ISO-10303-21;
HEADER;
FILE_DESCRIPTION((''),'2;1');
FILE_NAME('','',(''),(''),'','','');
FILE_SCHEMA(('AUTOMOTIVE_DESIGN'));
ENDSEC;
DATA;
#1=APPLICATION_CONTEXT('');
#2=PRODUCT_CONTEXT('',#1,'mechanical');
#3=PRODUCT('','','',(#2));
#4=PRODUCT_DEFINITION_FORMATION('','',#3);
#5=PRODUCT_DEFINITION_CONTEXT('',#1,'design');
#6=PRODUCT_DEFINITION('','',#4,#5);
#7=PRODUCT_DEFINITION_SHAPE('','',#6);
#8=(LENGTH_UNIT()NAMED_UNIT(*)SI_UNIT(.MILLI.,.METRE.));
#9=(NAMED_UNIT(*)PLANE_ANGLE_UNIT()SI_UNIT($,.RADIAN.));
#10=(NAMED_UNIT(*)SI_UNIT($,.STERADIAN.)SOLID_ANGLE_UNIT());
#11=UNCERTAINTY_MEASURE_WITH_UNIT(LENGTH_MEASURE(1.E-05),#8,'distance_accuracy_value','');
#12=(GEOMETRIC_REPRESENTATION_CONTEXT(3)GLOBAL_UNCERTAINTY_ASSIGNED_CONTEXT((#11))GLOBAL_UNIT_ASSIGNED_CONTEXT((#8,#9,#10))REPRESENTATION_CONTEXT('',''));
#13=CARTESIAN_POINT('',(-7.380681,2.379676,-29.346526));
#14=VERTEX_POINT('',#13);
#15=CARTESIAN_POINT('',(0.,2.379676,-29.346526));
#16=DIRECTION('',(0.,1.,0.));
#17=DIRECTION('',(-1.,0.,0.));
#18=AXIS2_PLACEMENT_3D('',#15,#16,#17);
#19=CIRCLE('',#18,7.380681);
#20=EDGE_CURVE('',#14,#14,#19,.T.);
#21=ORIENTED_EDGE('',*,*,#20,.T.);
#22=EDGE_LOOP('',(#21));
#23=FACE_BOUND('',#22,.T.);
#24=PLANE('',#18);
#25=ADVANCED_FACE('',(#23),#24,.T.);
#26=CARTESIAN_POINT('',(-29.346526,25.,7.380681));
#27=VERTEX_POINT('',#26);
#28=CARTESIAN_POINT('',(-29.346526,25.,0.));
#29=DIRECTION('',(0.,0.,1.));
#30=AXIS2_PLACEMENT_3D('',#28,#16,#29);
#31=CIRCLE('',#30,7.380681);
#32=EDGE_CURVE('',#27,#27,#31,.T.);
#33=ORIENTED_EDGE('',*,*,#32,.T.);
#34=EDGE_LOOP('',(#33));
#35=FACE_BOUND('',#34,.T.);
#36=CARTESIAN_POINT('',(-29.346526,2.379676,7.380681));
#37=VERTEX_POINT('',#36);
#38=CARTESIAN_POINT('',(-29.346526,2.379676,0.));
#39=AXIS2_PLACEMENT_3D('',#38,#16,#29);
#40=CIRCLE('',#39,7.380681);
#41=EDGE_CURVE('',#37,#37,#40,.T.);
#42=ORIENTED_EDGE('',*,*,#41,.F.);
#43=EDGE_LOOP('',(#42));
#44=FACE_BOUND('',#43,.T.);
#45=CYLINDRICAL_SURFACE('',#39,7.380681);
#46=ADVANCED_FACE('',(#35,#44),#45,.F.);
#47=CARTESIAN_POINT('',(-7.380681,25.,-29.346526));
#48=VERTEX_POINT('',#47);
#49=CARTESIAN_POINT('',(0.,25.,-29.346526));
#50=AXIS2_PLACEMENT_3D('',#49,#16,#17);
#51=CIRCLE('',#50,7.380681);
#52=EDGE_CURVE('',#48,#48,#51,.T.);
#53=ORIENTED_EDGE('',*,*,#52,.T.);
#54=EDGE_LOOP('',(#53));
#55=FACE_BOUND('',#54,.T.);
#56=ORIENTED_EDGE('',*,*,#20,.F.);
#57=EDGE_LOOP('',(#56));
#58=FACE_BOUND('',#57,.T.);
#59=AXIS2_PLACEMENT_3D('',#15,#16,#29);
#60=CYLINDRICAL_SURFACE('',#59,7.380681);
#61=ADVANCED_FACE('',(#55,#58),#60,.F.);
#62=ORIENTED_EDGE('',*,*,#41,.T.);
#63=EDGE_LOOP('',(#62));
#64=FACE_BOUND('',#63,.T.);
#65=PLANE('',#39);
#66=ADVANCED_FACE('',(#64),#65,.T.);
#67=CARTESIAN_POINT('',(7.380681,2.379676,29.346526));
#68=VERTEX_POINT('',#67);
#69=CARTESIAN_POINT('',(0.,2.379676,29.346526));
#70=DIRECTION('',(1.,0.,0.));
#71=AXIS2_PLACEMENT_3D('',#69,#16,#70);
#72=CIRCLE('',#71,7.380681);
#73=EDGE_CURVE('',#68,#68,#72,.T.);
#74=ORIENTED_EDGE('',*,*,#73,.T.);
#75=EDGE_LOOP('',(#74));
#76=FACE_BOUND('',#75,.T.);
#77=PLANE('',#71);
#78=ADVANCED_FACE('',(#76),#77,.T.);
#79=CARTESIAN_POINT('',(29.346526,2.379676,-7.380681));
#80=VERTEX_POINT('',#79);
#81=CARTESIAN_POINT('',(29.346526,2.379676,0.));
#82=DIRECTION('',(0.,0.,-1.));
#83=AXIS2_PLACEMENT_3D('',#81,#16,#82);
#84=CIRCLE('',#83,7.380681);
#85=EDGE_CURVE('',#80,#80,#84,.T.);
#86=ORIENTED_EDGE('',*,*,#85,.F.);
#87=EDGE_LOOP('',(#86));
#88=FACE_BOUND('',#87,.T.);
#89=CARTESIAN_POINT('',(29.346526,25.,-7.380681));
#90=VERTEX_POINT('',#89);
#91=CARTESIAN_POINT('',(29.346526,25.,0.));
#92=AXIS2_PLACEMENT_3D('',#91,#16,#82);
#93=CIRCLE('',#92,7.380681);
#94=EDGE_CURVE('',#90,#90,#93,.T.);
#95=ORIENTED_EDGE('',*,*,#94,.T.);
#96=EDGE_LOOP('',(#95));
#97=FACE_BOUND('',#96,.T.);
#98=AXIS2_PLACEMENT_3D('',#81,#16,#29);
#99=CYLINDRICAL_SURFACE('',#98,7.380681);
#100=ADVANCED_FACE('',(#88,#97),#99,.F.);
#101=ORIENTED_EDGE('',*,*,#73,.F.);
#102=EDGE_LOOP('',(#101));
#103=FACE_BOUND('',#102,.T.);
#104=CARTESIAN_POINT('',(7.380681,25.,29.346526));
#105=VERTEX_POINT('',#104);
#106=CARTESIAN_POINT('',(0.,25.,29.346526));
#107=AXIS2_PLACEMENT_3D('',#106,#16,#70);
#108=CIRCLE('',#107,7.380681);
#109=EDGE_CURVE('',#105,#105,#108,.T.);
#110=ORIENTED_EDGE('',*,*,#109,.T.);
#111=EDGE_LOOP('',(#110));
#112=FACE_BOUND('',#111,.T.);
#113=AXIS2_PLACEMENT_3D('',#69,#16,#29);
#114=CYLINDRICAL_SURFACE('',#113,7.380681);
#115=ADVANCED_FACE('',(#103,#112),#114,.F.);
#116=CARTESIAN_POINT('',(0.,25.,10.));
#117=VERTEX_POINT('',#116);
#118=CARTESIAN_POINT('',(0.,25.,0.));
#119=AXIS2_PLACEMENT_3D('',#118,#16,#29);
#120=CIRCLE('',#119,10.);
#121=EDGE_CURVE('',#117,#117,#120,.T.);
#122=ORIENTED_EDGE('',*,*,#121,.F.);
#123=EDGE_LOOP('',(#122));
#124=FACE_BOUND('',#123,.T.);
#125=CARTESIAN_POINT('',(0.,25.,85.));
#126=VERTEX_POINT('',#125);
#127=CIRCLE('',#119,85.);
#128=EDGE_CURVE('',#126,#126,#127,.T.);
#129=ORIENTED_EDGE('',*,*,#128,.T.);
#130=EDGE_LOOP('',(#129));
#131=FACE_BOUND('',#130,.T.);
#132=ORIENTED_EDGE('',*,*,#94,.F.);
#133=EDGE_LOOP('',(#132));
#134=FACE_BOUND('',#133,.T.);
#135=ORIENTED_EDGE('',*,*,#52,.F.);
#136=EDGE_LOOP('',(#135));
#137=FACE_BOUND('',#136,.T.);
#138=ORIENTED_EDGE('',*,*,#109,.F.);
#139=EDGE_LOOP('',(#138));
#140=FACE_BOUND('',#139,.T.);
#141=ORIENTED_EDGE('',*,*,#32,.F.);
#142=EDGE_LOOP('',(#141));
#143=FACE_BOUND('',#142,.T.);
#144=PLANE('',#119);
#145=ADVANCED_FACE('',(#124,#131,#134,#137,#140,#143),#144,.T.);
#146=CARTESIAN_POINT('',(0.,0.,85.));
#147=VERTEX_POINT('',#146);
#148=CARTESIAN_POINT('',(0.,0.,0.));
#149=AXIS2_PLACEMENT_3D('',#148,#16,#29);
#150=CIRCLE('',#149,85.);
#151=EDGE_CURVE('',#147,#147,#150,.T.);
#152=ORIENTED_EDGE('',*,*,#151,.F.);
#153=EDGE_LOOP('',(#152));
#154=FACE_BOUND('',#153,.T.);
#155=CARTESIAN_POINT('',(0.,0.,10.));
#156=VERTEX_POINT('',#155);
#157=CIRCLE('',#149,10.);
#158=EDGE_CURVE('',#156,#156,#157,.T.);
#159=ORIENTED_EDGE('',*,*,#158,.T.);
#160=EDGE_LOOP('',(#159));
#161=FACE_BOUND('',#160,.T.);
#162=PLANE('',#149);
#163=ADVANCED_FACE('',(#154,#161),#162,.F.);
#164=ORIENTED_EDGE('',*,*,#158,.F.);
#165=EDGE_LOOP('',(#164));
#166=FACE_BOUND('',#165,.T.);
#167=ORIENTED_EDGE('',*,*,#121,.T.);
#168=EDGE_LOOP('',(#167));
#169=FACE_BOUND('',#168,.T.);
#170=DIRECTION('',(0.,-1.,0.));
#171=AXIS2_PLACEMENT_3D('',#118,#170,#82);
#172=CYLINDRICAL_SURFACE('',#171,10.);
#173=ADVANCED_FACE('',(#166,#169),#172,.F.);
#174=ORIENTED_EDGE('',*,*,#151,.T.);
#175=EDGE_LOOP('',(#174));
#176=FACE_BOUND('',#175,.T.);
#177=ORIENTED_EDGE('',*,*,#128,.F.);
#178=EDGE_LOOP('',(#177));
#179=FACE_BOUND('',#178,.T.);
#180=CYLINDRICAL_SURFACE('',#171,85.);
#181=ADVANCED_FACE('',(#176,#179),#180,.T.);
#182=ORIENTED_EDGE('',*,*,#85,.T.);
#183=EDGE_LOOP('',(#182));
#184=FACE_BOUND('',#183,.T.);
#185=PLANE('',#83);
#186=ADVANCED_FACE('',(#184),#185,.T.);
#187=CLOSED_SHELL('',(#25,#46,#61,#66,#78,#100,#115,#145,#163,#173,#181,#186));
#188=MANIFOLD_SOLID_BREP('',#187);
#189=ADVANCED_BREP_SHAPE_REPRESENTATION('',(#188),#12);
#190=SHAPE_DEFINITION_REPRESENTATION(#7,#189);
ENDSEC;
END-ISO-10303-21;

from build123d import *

# Parameters (mm, degrees)
SKETCH1_R           = 85
BOSS_EXTRUDE1_DEPTH = 25
SKETCH2_R           = 10
CUT_EXTRUDE1_DEPTH  = 123.780291578
SKETCH3_R           = 7.380680735
CUT_EXTRUDE2_DEPTH  = 22.620324484
CIRPATTERN1_COUNT   = 4


with BuildPart() as part:
    # Sketch1 → Boss-Extrude1 (new body)
    with BuildSketch(Plane(origin=(0, 0, 0), x_dir=(1, 0, 0), z_dir=(0, 1, 0))):
        Circle(SKETCH1_R)
    extrude(amount=BOSS_EXTRUDE1_DEPTH)

    # Sketch2 → Cut-Extrude1 (cut, through all)
    with BuildSketch(Plane(origin=(0, 0, 0), x_dir=(1, 0, 0), z_dir=(0, 1, 0))):
        Circle(SKETCH2_R)
    extrude(amount=CUT_EXTRUDE1_DEPTH, mode=Mode.SUBTRACT)

    # Sketch3 → Cut-Extrude2 (cut)
    with BuildSketch(Plane(origin=(0, 25, 0), x_dir=(1, 0, 0), z_dir=(0, 1, 0))):
        with Locations((-29.346525836, 0)):
            Circle(SKETCH3_R)
    cut_extrude2 = extrude(amount=-CUT_EXTRUDE2_DEPTH, mode=Mode.SUBTRACT)

    # CirPattern1: Cut-Extrude2 ×4 about axis
    cirpattern1_axis = Axis((0, 0, 0), (0, 1, 0))
    for i in range(1, CIRPATTERN1_COUNT):
        add(cut_extrude2.rotate(cirpattern1_axis, i * 360 / CIRPATTERN1_COUNT), mode=Mode.SUBTRACT)


solid = part.part
